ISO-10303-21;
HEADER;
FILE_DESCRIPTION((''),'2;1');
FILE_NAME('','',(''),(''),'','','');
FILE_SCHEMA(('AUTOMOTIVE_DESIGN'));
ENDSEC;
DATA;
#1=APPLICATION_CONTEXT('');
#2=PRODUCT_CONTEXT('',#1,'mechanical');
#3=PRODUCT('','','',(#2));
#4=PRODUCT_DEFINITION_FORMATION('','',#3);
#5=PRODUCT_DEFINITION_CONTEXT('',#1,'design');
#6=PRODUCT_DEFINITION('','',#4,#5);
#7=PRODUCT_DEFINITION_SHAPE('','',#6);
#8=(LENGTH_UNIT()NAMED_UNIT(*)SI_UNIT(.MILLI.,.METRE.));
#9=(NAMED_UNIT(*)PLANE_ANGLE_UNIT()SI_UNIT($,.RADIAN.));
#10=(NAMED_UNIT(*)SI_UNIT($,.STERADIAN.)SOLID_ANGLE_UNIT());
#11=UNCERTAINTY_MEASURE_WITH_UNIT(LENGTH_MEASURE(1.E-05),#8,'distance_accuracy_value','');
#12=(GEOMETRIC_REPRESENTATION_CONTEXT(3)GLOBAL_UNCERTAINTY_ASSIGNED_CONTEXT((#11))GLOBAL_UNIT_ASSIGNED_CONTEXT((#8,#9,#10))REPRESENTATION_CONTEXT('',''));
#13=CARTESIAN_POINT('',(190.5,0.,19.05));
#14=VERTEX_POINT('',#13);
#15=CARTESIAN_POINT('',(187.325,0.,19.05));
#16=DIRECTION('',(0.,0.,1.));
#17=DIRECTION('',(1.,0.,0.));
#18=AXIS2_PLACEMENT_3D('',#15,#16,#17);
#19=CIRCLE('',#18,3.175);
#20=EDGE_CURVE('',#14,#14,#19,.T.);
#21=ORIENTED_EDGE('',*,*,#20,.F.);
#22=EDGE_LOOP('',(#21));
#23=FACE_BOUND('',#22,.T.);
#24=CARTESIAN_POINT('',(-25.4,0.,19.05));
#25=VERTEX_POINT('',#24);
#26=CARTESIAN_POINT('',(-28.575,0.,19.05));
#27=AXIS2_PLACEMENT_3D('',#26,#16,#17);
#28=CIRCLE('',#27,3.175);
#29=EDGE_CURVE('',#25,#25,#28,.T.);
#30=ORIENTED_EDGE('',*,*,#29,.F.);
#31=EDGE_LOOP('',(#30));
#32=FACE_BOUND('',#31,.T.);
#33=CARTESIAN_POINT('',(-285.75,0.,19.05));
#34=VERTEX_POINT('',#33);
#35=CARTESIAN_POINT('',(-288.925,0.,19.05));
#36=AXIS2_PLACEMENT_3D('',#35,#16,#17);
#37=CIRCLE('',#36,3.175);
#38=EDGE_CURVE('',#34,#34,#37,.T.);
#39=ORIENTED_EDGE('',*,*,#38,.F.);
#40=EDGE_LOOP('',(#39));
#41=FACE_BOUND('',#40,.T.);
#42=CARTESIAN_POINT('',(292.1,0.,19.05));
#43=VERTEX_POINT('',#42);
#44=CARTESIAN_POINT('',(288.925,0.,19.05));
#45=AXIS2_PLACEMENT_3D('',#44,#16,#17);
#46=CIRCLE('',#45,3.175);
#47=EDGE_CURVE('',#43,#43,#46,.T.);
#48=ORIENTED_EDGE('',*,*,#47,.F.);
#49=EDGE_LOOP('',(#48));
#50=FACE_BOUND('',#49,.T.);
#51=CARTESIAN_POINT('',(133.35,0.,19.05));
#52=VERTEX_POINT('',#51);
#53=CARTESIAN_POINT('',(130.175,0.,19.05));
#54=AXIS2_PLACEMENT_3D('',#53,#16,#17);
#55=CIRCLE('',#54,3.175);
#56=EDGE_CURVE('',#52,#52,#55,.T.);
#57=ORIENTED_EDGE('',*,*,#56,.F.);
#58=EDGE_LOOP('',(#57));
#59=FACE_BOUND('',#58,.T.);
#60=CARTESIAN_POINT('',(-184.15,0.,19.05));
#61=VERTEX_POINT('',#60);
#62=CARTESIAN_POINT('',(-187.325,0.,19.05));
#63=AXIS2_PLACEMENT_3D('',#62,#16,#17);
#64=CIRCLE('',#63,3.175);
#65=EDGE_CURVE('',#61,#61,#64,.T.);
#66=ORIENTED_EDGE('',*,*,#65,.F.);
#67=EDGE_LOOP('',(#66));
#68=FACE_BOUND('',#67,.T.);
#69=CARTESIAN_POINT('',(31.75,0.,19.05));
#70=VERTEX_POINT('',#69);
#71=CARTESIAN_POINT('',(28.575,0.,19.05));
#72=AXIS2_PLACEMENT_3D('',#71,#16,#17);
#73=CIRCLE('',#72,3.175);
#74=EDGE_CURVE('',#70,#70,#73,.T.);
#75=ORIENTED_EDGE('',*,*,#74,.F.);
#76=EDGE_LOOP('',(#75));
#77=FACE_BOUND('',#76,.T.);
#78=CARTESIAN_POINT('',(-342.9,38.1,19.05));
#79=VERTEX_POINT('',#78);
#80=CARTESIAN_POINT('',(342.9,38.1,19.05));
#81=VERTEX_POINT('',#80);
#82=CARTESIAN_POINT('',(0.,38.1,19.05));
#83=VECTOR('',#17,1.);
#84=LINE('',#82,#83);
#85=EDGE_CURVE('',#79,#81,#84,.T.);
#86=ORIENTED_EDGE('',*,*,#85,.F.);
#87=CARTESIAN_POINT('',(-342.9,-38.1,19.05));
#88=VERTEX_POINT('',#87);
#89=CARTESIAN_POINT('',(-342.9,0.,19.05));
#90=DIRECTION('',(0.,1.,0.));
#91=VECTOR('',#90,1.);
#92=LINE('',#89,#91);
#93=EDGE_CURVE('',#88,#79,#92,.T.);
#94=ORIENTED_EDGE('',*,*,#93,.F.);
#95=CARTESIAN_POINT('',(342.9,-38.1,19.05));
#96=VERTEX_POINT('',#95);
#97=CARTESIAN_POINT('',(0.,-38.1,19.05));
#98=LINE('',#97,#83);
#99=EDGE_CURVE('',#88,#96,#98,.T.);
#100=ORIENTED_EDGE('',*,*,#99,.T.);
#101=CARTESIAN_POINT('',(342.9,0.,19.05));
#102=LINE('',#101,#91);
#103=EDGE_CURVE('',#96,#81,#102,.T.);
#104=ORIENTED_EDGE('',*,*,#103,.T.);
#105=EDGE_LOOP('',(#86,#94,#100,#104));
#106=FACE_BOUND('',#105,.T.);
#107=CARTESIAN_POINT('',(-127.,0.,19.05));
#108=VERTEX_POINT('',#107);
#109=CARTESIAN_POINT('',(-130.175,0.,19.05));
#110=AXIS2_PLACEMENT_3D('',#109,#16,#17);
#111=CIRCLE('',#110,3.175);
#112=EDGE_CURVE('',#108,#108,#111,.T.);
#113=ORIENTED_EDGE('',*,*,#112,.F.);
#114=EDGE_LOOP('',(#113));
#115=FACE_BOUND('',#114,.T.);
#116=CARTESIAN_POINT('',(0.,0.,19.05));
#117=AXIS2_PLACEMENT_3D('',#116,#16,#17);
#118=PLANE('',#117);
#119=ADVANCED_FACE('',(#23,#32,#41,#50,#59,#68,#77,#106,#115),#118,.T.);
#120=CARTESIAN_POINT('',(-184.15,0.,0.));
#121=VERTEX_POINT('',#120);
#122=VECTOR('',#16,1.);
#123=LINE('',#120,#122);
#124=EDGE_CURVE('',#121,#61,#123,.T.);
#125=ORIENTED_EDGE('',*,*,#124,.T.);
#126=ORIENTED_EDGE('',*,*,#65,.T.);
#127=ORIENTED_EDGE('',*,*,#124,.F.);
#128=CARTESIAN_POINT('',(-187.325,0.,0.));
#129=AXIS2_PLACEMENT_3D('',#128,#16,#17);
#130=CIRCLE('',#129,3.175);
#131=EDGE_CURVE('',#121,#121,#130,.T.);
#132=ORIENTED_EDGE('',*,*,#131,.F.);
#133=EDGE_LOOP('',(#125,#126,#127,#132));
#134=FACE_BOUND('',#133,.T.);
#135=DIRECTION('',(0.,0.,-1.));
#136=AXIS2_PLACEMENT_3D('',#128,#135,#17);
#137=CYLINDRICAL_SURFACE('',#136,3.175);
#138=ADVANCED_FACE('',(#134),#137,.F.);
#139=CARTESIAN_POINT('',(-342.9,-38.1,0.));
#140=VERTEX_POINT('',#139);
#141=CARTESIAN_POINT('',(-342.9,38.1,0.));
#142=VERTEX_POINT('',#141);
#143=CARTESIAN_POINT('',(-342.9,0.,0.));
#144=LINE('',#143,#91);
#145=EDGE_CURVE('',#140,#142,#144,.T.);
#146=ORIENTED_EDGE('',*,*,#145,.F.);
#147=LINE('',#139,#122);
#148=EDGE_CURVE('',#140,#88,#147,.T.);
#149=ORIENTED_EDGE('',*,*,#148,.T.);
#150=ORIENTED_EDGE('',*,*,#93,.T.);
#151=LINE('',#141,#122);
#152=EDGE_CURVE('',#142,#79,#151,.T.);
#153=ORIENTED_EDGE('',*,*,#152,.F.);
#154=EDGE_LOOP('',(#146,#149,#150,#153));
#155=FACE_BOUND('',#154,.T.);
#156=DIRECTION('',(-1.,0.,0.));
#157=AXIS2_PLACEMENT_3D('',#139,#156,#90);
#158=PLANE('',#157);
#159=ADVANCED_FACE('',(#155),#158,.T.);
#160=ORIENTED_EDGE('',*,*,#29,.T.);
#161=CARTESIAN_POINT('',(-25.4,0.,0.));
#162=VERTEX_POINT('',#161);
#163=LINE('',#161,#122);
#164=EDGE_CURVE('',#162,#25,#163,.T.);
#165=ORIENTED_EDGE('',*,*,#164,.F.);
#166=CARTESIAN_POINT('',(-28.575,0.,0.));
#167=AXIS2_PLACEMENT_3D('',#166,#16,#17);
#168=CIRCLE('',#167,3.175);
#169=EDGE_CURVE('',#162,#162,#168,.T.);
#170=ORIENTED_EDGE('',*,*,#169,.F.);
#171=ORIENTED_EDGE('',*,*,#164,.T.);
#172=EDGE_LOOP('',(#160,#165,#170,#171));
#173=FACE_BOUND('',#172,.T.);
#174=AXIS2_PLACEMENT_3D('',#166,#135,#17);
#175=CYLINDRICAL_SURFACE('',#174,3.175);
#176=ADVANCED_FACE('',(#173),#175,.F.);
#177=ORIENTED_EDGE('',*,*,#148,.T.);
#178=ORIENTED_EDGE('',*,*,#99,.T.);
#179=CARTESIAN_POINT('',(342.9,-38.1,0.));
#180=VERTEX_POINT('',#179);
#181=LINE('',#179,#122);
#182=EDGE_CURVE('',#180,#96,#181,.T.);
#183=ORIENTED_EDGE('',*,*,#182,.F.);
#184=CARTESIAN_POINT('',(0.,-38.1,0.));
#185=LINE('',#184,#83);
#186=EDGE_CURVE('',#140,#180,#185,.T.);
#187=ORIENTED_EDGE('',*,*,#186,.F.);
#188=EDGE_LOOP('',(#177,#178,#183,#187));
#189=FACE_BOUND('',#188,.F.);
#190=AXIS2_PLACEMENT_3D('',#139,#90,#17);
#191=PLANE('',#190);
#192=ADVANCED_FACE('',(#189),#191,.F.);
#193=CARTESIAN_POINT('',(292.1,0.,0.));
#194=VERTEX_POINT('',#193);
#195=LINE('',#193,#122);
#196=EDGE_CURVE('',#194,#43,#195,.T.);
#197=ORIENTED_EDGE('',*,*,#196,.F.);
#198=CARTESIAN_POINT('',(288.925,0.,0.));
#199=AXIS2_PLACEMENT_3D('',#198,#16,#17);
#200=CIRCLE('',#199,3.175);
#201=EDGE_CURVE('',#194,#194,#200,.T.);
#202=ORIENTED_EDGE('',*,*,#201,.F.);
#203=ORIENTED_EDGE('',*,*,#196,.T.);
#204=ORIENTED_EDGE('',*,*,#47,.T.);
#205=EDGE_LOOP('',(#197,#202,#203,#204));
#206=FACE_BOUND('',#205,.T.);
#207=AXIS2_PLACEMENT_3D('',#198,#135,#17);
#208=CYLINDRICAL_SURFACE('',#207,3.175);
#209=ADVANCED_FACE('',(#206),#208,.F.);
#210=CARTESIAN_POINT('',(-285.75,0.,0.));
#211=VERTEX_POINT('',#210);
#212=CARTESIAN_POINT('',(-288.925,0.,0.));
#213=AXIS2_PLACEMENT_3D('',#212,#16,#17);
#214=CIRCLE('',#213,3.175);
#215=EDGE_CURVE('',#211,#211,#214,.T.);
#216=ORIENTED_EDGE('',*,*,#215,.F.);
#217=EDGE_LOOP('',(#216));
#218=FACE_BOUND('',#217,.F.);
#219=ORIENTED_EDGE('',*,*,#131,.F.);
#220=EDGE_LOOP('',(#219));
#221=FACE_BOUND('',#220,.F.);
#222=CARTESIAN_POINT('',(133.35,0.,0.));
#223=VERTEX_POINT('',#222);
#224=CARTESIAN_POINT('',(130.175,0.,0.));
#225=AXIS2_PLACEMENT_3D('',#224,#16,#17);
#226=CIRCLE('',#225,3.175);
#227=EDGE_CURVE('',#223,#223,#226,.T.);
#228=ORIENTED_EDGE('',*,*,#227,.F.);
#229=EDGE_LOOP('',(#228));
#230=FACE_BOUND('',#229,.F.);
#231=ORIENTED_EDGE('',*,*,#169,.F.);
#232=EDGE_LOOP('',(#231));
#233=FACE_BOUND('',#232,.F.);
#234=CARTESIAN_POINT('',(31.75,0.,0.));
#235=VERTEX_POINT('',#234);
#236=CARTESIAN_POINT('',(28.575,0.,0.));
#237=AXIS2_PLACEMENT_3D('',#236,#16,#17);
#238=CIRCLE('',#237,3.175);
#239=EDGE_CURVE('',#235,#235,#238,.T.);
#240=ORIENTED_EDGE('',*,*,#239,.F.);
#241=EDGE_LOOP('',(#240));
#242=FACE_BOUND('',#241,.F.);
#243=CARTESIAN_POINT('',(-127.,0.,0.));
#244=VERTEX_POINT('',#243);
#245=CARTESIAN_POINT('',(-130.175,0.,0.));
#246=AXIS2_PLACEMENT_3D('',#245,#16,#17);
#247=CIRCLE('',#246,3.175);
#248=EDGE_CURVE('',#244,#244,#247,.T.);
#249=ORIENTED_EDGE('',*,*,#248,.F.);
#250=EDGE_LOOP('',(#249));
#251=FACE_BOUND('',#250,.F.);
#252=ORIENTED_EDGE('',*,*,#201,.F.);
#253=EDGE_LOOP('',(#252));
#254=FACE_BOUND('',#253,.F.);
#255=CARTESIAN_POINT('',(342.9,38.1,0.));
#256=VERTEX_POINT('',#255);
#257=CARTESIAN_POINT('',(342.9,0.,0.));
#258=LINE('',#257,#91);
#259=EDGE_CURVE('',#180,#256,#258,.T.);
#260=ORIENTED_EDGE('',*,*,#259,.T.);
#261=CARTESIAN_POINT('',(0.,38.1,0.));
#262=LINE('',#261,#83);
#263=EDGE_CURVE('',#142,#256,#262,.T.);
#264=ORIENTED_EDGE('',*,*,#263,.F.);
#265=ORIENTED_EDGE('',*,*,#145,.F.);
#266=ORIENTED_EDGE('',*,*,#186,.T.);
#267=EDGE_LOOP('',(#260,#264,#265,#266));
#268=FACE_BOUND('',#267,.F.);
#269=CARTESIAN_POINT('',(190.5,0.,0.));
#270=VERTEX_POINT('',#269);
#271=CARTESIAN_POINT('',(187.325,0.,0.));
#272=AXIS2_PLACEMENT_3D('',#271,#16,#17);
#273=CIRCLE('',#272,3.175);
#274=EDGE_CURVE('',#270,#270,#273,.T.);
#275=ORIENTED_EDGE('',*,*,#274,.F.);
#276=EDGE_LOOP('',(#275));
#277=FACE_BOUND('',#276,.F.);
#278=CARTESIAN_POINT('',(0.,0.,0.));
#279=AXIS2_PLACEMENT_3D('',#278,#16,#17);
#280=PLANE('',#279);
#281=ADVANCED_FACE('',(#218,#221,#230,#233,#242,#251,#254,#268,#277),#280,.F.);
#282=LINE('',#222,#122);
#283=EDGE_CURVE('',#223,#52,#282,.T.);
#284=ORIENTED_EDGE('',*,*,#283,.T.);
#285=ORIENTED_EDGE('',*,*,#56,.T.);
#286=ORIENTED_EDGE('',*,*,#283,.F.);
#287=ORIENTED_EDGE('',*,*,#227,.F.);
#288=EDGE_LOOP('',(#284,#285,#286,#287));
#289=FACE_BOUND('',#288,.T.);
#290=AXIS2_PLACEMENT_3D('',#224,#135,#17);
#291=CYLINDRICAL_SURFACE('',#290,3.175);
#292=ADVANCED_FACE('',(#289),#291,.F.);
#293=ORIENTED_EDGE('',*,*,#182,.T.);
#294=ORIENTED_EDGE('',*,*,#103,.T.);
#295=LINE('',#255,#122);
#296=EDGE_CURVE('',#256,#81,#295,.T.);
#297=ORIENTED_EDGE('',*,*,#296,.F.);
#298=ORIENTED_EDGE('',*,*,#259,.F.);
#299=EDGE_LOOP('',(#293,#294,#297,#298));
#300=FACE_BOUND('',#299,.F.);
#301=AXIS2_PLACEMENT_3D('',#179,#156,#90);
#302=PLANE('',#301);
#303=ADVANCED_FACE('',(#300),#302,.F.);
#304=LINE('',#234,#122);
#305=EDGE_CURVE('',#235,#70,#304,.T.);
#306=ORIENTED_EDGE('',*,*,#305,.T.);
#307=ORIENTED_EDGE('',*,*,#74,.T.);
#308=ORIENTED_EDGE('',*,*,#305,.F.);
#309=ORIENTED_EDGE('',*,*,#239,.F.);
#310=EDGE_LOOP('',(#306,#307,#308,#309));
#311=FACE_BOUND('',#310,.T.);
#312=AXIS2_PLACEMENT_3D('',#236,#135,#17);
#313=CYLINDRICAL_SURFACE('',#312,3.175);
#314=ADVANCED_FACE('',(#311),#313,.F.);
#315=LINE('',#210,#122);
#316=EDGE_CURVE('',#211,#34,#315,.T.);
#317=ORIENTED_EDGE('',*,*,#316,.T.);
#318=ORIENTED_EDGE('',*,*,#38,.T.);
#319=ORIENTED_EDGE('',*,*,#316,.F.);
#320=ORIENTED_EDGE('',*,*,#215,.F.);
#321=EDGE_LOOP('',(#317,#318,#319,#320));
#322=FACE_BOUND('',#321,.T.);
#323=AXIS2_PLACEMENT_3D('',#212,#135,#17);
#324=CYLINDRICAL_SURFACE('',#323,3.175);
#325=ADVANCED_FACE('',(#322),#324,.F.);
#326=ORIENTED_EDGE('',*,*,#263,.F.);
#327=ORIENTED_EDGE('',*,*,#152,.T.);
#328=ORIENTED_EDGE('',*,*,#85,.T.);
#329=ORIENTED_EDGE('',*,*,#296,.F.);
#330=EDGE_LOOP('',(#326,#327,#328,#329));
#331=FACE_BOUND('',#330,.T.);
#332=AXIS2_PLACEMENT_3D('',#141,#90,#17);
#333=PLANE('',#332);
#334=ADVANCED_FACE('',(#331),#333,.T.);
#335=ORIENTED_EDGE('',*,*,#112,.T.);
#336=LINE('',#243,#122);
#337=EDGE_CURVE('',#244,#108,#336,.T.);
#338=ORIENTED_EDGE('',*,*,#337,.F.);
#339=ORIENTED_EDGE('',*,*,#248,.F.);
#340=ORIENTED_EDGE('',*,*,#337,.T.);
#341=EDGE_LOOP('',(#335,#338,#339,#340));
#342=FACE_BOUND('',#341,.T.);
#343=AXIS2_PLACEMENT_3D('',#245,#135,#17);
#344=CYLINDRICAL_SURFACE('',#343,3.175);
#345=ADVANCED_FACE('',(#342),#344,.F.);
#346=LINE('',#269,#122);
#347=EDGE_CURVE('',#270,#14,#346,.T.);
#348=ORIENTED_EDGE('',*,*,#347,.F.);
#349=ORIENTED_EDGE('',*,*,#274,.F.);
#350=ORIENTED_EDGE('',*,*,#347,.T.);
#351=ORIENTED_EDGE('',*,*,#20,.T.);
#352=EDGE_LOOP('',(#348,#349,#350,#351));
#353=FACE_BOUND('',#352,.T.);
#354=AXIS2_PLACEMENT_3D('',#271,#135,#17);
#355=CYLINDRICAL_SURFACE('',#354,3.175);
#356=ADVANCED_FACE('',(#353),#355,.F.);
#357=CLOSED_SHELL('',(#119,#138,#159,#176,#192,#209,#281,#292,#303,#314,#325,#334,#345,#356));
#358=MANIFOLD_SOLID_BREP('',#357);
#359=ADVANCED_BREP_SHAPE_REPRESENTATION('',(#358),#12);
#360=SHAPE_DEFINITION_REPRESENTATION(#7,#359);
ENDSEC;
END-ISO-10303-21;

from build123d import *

# Parameters (mm, degrees)
F1_W     = 685.8
F1_H     = 76.2
F1_R     = 3.175
F2_DEPTH = 19.05


# Not quite as in the source:
# - a variable given as a bare number and used for a length is read in inches; the dataset says mm whatever the document's units were


with BuildPart() as f2:
    # F1 (on Top) → F2 (new body)
    with BuildSketch(Plane.XY):
        Rectangle(F1_W, F1_H)
        with Locations((-288.925, 0)):
            Circle(F1_R, mode=Mode.SUBTRACT)
        with Locations((-187.325, 0)):
            Circle(F1_R, mode=Mode.SUBTRACT)
        with Locations((-130.175, 0)):
            Circle(F1_R, mode=Mode.SUBTRACT)
        with Locations((-28.575, 0)):
            Circle(F1_R, mode=Mode.SUBTRACT)
        with Locations((28.575, 0)):
            Circle(F1_R, mode=Mode.SUBTRACT)
        with Locations((130.175, 0)):
            Circle(F1_R, mode=Mode.SUBTRACT)
        with Locations((187.325, 0)):
            Circle(F1_R, mode=Mode.SUBTRACT)
        with Locations((288.925, 0)):
            Circle(F1_R, mode=Mode.SUBTRACT)
    extrude(amount=F2_DEPTH)


solid = f2.part
